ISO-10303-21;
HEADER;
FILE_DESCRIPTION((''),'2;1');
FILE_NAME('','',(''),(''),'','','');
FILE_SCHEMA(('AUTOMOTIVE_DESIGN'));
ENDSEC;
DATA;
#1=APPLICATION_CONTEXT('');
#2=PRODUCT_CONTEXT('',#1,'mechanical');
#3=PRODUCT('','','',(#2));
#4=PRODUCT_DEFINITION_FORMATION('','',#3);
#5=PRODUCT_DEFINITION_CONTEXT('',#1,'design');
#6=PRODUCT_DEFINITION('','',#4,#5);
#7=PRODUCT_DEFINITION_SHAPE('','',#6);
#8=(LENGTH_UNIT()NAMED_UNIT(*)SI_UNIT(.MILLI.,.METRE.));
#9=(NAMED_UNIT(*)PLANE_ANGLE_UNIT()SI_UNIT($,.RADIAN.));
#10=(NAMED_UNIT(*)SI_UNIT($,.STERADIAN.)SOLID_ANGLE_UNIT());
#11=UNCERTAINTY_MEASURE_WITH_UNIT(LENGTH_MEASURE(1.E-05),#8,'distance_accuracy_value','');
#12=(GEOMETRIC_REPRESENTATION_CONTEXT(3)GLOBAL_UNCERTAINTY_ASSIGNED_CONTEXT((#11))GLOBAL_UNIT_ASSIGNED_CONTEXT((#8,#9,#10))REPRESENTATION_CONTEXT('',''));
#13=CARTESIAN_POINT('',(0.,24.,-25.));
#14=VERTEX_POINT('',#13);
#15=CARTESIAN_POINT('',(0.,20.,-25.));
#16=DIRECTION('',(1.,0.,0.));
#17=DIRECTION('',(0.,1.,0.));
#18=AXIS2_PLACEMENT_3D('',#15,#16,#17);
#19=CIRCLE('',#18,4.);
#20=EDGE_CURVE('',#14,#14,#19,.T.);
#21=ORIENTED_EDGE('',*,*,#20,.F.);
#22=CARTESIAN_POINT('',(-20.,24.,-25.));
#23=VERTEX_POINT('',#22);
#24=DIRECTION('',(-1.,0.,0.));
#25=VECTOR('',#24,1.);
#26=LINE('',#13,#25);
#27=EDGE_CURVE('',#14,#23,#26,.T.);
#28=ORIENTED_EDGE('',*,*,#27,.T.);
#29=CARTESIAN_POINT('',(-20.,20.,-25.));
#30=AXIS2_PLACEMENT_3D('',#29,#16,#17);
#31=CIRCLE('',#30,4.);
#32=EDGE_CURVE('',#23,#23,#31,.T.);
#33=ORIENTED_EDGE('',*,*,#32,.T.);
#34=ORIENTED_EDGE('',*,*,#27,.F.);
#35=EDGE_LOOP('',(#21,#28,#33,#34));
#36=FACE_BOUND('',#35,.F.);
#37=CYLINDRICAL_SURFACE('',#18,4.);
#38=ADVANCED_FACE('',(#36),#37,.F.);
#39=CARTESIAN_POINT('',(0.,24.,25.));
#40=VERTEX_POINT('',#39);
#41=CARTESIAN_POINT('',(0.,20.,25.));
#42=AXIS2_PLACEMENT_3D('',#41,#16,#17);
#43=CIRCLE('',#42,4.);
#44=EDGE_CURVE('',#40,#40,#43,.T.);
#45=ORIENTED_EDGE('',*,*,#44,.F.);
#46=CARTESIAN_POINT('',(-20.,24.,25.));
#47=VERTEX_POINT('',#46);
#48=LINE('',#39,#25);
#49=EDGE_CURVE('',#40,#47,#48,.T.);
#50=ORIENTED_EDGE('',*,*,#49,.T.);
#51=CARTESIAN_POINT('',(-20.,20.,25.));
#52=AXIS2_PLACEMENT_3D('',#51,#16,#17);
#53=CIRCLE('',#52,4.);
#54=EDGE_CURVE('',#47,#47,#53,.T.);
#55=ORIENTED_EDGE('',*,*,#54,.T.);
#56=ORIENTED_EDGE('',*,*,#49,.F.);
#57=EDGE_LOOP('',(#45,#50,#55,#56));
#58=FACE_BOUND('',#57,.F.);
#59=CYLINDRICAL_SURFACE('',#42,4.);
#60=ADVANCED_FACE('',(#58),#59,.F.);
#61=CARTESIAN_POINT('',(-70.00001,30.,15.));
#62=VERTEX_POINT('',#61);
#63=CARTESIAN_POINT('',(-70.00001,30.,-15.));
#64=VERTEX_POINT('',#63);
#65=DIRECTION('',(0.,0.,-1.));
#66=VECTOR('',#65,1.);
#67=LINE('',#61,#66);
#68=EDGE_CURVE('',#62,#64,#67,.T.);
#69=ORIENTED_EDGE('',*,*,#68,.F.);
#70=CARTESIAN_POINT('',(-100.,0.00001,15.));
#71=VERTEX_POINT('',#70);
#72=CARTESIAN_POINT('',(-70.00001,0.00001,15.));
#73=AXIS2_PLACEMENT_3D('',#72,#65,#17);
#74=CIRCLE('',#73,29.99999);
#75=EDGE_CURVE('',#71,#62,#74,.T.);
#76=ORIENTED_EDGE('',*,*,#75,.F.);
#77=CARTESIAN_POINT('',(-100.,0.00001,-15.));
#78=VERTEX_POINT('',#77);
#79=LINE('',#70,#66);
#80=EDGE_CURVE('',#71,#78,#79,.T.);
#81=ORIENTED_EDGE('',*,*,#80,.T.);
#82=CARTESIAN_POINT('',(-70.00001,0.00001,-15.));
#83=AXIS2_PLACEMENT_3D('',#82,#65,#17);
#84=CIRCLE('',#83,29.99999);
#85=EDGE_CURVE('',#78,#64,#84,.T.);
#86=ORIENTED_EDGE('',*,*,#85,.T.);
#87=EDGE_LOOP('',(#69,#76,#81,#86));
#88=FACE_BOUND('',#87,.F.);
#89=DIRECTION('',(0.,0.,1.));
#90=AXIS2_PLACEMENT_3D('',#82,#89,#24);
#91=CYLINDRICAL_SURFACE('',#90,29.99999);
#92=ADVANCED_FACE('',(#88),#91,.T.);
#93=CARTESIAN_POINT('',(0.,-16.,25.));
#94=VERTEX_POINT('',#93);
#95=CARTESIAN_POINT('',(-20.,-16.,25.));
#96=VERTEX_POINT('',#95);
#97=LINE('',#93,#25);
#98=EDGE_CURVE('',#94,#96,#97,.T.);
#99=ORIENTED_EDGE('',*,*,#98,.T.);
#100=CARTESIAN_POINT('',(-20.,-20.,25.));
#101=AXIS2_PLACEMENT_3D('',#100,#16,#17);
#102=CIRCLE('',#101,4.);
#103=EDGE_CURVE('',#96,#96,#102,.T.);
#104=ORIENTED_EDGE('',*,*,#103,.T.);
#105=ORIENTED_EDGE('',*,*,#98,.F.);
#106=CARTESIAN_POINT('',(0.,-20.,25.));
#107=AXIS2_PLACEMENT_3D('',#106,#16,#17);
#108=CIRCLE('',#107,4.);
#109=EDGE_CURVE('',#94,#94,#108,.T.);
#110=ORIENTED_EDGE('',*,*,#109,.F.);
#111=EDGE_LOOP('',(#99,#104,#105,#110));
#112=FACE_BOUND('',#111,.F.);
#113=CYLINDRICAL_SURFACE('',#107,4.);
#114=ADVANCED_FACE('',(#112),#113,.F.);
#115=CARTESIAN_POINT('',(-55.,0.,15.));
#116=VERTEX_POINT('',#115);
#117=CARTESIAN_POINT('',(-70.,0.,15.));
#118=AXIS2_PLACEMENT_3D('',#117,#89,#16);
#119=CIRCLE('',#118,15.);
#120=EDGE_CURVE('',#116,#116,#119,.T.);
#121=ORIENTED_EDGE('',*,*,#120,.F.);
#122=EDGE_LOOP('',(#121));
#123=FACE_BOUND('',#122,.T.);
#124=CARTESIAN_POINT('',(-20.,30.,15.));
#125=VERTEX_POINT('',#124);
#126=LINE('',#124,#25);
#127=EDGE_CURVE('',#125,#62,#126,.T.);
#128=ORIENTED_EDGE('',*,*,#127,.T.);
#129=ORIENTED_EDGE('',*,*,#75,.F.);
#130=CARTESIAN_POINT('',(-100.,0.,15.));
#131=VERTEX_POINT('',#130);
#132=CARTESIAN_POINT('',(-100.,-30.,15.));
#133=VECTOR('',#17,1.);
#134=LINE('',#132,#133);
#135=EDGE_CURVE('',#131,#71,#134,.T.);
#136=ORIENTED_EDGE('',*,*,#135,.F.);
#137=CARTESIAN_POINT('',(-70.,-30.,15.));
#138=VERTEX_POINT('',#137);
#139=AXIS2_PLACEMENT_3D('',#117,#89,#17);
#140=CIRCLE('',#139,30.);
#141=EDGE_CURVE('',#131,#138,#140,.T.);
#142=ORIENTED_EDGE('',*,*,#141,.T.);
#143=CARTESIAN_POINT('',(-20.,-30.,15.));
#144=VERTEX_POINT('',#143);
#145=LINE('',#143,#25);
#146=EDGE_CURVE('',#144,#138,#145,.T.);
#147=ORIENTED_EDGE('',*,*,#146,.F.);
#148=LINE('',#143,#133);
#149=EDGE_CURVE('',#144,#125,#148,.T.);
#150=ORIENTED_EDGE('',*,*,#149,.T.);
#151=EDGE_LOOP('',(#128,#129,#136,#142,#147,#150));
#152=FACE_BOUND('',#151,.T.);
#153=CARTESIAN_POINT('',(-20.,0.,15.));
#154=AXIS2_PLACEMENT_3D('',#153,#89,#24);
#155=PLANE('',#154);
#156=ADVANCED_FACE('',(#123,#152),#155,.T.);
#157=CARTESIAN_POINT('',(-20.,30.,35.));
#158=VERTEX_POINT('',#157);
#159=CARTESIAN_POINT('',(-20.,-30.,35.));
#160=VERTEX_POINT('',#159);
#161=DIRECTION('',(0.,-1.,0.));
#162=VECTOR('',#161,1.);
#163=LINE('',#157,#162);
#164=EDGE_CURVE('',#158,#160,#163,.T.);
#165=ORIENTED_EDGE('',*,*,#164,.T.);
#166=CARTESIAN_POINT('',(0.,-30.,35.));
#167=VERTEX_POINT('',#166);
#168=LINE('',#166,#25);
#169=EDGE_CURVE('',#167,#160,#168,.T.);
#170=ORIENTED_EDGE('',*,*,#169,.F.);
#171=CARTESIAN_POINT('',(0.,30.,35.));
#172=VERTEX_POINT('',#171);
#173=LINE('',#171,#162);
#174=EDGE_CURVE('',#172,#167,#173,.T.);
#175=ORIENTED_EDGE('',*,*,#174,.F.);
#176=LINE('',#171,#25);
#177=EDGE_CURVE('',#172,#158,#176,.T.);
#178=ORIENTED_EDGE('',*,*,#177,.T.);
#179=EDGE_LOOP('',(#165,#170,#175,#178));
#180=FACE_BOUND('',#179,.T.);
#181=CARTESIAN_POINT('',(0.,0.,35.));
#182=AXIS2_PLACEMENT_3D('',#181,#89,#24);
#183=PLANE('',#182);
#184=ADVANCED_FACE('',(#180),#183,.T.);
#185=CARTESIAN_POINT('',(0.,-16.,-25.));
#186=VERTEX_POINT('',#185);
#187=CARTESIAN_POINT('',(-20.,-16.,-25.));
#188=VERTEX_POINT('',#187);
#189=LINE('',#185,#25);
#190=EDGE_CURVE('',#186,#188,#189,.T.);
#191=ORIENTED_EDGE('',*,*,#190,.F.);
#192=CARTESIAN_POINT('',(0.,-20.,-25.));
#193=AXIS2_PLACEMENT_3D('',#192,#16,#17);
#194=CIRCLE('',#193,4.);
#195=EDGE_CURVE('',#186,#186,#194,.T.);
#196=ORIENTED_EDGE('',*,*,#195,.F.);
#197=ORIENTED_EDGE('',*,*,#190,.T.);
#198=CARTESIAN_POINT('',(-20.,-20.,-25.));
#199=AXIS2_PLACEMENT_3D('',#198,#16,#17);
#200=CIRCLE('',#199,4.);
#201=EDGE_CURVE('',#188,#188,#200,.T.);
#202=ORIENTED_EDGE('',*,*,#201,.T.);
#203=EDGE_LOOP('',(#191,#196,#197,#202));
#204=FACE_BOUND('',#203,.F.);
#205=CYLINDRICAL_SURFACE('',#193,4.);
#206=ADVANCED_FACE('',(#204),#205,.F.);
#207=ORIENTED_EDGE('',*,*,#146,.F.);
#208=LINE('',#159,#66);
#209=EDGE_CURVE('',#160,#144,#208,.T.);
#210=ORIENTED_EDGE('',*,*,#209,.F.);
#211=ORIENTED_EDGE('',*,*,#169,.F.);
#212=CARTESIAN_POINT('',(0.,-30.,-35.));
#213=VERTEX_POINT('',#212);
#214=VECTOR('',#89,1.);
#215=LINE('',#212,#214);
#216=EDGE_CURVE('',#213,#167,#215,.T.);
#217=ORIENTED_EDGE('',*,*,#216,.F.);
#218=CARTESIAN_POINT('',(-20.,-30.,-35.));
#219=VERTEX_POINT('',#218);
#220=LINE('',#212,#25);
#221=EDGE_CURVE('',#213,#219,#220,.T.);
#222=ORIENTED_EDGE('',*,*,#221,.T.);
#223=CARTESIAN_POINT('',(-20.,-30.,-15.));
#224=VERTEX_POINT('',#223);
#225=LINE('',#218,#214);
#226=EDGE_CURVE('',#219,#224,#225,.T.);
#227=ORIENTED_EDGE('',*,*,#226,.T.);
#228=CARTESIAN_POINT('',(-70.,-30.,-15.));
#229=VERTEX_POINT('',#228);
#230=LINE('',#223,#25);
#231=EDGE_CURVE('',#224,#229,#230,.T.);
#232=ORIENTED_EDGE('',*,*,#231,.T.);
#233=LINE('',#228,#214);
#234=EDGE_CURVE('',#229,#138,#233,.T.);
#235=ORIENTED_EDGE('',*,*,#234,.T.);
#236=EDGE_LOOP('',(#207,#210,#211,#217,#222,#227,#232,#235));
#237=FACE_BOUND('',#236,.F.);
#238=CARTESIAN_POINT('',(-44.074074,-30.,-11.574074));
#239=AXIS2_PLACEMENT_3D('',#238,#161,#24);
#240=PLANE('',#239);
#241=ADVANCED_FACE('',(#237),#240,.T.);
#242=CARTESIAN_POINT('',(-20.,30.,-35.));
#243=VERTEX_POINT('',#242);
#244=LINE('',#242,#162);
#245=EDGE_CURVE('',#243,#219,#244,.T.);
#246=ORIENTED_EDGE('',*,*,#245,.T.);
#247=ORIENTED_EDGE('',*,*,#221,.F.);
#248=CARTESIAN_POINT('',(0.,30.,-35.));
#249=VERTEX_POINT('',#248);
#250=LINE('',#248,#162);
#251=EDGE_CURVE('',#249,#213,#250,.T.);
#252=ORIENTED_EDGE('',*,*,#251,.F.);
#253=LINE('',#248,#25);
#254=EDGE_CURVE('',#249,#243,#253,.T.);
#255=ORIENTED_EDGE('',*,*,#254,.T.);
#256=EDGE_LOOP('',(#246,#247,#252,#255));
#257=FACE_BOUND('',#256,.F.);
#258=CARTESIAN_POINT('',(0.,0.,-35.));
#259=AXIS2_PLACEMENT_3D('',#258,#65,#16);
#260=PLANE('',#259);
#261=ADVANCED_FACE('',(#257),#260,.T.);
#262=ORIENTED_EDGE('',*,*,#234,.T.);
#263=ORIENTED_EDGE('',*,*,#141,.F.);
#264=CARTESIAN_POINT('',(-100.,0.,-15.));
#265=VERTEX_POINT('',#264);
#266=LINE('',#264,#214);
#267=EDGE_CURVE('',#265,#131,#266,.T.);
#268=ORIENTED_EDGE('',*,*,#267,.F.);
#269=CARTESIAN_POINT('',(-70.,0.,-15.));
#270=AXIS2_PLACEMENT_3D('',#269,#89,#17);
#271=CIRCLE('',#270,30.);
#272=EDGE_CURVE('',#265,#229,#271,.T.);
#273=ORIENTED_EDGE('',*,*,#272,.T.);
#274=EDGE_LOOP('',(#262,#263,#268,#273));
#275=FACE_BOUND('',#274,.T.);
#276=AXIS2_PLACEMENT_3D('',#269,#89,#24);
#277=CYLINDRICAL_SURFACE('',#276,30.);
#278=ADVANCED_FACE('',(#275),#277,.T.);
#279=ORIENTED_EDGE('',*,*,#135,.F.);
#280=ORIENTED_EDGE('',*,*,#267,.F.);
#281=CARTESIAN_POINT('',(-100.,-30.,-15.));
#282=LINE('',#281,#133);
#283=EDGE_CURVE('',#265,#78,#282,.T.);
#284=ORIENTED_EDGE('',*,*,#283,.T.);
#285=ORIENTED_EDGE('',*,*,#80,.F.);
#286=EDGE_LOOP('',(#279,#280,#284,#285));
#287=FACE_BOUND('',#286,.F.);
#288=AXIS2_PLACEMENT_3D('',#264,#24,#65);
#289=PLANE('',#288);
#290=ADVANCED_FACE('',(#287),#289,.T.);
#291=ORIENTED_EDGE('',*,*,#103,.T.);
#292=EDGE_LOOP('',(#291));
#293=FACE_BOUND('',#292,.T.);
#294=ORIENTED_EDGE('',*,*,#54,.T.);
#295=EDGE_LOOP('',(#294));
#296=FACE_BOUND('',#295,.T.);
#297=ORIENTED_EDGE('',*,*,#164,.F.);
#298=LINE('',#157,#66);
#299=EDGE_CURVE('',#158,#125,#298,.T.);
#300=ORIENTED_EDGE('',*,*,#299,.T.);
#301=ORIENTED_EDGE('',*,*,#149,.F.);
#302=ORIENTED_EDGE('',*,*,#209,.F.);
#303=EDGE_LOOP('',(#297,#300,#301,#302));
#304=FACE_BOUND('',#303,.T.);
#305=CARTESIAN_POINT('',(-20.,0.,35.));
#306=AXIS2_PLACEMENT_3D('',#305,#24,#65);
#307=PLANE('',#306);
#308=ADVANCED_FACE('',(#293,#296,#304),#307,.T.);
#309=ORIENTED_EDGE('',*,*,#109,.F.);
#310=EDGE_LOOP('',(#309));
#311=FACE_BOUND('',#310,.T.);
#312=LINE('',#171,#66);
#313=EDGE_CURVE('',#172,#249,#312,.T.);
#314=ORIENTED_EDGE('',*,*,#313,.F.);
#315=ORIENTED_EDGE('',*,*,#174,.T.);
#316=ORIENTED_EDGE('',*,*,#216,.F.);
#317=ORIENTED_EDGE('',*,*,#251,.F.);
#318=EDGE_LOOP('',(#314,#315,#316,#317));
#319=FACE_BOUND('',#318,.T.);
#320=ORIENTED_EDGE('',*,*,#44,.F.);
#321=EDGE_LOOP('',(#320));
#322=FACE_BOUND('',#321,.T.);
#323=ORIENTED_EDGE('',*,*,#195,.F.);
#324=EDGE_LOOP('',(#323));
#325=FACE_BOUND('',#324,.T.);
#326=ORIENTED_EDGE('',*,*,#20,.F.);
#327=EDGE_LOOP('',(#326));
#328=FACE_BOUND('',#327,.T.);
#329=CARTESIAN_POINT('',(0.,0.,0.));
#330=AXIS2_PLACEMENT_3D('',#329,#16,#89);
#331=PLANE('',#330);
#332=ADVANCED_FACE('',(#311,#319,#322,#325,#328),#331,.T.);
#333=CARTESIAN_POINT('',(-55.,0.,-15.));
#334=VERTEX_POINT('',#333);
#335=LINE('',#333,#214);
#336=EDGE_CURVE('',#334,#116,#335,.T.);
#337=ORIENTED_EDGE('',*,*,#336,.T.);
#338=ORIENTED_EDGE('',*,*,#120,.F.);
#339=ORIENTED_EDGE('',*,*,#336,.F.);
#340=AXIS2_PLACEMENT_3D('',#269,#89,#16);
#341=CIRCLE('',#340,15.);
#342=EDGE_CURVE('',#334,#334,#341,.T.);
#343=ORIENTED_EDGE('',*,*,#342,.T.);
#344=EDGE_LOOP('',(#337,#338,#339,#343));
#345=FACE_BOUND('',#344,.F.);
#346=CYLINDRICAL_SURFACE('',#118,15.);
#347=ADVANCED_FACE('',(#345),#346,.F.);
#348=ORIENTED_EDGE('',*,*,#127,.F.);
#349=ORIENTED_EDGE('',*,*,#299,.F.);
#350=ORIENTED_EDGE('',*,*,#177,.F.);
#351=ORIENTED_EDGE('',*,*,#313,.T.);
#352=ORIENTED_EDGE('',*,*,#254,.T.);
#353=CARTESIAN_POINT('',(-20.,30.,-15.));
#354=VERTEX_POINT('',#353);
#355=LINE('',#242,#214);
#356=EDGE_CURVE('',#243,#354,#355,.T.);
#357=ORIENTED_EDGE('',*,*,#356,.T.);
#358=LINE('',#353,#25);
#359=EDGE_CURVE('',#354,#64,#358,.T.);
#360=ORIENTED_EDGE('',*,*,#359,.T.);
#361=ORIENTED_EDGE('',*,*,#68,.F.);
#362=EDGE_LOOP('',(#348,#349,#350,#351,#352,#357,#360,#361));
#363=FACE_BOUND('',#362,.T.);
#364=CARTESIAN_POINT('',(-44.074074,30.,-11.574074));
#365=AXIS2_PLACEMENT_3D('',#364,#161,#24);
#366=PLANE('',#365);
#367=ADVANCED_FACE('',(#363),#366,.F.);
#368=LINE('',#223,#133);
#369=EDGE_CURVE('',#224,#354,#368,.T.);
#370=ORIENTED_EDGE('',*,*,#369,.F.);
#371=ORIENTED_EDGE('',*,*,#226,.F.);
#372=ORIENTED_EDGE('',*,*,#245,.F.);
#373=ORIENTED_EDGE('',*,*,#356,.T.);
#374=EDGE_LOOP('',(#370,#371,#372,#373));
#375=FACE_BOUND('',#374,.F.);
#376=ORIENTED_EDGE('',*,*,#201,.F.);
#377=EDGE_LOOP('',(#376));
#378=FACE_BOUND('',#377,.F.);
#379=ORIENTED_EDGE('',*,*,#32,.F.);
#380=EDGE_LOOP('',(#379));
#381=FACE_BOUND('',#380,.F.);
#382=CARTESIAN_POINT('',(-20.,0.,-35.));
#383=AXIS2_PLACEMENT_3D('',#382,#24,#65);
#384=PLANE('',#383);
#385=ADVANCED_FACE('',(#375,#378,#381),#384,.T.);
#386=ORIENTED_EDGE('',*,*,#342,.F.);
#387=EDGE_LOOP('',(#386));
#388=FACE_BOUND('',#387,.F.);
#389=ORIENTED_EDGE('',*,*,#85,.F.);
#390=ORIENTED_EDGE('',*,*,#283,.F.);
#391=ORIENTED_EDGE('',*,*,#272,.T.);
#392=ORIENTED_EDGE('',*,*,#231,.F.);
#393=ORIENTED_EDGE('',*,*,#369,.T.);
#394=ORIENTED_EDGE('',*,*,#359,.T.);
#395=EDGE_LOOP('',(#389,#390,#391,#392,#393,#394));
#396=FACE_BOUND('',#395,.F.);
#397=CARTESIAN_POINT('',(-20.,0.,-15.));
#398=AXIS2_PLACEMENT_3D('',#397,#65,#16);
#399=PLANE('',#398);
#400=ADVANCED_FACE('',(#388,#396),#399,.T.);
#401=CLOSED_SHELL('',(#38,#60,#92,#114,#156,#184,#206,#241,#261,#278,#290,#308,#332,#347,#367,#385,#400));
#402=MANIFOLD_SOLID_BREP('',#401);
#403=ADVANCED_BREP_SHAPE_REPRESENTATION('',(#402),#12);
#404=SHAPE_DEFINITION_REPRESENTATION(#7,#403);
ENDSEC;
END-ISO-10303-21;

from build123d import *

# Parameters (mm, degrees)
F1_DEPTH = 30
F2_R     = 30
F3_R     = 29.99999
F4_R     = 15
F5_DEPTH = 15
F7_R     = 4
F8_DEPTH = 20


# Not quite as in the source:
# - a fillet or chamfer is up to 0.001 mm smaller than in the source, because OpenCascade refuses the exact size


with BuildPart() as f1:
    # F0 (on Front) → F1 (new body, symmetric)
    with BuildSketch(Plane.XZ):
        Polygon((-100, 0), (0, 0), (0, 35), (-20, 35), (-20, 15), (-100, 15), align=None)
    extrude(amount=F1_DEPTH, both=True)

    # F2
    f2_edges = [f1.edges().sort_by_distance(p)[0] for p in [
        (-100, -30, 7.5),
    ]]
    fillet(f2_edges, radius=F2_R)

    # F3 (radius 30 in the source; OpenCascade refuses exactly that, so slightly less here)
    f3_edges = [f1.edges().sort_by_distance(p)[0] for p in [
        (-100, 30, 7.5),
    ]]
    fillet(f3_edges, radius=F3_R)

    # F4 (on face) → F5 (cut, through all)
    with BuildSketch(Plane.XY.offset(15)):
        with Locations((-70, 0)):
            Circle(F4_R)
    extrude(amount=-F5_DEPTH, mode=Mode.SUBTRACT)

    # F6: F1 across plane


with BuildPart() as f1_1:
    add(f1.part)
    add(f1.part.mirror(Plane.XY))

    # F7 (on face) → F8 (cut, through all)
    with BuildSketch(Plane.YZ):
        with BuildLine():
            ThreePointArc((-24, -25), (-20, -29), (-16, -25))
            ThreePointArc((-16, -25), (-20, -21), (-24, -25))
        make_face()
        with Locations((-20, 25)):
            Circle(F7_R)
        with Locations((20, -25)):
            Circle(F7_R)
        with Locations((20, 25)):
            Circle(F7_R)
    extrude(amount=-F8_DEPTH, mode=Mode.SUBTRACT)


solid = f1_1.part
